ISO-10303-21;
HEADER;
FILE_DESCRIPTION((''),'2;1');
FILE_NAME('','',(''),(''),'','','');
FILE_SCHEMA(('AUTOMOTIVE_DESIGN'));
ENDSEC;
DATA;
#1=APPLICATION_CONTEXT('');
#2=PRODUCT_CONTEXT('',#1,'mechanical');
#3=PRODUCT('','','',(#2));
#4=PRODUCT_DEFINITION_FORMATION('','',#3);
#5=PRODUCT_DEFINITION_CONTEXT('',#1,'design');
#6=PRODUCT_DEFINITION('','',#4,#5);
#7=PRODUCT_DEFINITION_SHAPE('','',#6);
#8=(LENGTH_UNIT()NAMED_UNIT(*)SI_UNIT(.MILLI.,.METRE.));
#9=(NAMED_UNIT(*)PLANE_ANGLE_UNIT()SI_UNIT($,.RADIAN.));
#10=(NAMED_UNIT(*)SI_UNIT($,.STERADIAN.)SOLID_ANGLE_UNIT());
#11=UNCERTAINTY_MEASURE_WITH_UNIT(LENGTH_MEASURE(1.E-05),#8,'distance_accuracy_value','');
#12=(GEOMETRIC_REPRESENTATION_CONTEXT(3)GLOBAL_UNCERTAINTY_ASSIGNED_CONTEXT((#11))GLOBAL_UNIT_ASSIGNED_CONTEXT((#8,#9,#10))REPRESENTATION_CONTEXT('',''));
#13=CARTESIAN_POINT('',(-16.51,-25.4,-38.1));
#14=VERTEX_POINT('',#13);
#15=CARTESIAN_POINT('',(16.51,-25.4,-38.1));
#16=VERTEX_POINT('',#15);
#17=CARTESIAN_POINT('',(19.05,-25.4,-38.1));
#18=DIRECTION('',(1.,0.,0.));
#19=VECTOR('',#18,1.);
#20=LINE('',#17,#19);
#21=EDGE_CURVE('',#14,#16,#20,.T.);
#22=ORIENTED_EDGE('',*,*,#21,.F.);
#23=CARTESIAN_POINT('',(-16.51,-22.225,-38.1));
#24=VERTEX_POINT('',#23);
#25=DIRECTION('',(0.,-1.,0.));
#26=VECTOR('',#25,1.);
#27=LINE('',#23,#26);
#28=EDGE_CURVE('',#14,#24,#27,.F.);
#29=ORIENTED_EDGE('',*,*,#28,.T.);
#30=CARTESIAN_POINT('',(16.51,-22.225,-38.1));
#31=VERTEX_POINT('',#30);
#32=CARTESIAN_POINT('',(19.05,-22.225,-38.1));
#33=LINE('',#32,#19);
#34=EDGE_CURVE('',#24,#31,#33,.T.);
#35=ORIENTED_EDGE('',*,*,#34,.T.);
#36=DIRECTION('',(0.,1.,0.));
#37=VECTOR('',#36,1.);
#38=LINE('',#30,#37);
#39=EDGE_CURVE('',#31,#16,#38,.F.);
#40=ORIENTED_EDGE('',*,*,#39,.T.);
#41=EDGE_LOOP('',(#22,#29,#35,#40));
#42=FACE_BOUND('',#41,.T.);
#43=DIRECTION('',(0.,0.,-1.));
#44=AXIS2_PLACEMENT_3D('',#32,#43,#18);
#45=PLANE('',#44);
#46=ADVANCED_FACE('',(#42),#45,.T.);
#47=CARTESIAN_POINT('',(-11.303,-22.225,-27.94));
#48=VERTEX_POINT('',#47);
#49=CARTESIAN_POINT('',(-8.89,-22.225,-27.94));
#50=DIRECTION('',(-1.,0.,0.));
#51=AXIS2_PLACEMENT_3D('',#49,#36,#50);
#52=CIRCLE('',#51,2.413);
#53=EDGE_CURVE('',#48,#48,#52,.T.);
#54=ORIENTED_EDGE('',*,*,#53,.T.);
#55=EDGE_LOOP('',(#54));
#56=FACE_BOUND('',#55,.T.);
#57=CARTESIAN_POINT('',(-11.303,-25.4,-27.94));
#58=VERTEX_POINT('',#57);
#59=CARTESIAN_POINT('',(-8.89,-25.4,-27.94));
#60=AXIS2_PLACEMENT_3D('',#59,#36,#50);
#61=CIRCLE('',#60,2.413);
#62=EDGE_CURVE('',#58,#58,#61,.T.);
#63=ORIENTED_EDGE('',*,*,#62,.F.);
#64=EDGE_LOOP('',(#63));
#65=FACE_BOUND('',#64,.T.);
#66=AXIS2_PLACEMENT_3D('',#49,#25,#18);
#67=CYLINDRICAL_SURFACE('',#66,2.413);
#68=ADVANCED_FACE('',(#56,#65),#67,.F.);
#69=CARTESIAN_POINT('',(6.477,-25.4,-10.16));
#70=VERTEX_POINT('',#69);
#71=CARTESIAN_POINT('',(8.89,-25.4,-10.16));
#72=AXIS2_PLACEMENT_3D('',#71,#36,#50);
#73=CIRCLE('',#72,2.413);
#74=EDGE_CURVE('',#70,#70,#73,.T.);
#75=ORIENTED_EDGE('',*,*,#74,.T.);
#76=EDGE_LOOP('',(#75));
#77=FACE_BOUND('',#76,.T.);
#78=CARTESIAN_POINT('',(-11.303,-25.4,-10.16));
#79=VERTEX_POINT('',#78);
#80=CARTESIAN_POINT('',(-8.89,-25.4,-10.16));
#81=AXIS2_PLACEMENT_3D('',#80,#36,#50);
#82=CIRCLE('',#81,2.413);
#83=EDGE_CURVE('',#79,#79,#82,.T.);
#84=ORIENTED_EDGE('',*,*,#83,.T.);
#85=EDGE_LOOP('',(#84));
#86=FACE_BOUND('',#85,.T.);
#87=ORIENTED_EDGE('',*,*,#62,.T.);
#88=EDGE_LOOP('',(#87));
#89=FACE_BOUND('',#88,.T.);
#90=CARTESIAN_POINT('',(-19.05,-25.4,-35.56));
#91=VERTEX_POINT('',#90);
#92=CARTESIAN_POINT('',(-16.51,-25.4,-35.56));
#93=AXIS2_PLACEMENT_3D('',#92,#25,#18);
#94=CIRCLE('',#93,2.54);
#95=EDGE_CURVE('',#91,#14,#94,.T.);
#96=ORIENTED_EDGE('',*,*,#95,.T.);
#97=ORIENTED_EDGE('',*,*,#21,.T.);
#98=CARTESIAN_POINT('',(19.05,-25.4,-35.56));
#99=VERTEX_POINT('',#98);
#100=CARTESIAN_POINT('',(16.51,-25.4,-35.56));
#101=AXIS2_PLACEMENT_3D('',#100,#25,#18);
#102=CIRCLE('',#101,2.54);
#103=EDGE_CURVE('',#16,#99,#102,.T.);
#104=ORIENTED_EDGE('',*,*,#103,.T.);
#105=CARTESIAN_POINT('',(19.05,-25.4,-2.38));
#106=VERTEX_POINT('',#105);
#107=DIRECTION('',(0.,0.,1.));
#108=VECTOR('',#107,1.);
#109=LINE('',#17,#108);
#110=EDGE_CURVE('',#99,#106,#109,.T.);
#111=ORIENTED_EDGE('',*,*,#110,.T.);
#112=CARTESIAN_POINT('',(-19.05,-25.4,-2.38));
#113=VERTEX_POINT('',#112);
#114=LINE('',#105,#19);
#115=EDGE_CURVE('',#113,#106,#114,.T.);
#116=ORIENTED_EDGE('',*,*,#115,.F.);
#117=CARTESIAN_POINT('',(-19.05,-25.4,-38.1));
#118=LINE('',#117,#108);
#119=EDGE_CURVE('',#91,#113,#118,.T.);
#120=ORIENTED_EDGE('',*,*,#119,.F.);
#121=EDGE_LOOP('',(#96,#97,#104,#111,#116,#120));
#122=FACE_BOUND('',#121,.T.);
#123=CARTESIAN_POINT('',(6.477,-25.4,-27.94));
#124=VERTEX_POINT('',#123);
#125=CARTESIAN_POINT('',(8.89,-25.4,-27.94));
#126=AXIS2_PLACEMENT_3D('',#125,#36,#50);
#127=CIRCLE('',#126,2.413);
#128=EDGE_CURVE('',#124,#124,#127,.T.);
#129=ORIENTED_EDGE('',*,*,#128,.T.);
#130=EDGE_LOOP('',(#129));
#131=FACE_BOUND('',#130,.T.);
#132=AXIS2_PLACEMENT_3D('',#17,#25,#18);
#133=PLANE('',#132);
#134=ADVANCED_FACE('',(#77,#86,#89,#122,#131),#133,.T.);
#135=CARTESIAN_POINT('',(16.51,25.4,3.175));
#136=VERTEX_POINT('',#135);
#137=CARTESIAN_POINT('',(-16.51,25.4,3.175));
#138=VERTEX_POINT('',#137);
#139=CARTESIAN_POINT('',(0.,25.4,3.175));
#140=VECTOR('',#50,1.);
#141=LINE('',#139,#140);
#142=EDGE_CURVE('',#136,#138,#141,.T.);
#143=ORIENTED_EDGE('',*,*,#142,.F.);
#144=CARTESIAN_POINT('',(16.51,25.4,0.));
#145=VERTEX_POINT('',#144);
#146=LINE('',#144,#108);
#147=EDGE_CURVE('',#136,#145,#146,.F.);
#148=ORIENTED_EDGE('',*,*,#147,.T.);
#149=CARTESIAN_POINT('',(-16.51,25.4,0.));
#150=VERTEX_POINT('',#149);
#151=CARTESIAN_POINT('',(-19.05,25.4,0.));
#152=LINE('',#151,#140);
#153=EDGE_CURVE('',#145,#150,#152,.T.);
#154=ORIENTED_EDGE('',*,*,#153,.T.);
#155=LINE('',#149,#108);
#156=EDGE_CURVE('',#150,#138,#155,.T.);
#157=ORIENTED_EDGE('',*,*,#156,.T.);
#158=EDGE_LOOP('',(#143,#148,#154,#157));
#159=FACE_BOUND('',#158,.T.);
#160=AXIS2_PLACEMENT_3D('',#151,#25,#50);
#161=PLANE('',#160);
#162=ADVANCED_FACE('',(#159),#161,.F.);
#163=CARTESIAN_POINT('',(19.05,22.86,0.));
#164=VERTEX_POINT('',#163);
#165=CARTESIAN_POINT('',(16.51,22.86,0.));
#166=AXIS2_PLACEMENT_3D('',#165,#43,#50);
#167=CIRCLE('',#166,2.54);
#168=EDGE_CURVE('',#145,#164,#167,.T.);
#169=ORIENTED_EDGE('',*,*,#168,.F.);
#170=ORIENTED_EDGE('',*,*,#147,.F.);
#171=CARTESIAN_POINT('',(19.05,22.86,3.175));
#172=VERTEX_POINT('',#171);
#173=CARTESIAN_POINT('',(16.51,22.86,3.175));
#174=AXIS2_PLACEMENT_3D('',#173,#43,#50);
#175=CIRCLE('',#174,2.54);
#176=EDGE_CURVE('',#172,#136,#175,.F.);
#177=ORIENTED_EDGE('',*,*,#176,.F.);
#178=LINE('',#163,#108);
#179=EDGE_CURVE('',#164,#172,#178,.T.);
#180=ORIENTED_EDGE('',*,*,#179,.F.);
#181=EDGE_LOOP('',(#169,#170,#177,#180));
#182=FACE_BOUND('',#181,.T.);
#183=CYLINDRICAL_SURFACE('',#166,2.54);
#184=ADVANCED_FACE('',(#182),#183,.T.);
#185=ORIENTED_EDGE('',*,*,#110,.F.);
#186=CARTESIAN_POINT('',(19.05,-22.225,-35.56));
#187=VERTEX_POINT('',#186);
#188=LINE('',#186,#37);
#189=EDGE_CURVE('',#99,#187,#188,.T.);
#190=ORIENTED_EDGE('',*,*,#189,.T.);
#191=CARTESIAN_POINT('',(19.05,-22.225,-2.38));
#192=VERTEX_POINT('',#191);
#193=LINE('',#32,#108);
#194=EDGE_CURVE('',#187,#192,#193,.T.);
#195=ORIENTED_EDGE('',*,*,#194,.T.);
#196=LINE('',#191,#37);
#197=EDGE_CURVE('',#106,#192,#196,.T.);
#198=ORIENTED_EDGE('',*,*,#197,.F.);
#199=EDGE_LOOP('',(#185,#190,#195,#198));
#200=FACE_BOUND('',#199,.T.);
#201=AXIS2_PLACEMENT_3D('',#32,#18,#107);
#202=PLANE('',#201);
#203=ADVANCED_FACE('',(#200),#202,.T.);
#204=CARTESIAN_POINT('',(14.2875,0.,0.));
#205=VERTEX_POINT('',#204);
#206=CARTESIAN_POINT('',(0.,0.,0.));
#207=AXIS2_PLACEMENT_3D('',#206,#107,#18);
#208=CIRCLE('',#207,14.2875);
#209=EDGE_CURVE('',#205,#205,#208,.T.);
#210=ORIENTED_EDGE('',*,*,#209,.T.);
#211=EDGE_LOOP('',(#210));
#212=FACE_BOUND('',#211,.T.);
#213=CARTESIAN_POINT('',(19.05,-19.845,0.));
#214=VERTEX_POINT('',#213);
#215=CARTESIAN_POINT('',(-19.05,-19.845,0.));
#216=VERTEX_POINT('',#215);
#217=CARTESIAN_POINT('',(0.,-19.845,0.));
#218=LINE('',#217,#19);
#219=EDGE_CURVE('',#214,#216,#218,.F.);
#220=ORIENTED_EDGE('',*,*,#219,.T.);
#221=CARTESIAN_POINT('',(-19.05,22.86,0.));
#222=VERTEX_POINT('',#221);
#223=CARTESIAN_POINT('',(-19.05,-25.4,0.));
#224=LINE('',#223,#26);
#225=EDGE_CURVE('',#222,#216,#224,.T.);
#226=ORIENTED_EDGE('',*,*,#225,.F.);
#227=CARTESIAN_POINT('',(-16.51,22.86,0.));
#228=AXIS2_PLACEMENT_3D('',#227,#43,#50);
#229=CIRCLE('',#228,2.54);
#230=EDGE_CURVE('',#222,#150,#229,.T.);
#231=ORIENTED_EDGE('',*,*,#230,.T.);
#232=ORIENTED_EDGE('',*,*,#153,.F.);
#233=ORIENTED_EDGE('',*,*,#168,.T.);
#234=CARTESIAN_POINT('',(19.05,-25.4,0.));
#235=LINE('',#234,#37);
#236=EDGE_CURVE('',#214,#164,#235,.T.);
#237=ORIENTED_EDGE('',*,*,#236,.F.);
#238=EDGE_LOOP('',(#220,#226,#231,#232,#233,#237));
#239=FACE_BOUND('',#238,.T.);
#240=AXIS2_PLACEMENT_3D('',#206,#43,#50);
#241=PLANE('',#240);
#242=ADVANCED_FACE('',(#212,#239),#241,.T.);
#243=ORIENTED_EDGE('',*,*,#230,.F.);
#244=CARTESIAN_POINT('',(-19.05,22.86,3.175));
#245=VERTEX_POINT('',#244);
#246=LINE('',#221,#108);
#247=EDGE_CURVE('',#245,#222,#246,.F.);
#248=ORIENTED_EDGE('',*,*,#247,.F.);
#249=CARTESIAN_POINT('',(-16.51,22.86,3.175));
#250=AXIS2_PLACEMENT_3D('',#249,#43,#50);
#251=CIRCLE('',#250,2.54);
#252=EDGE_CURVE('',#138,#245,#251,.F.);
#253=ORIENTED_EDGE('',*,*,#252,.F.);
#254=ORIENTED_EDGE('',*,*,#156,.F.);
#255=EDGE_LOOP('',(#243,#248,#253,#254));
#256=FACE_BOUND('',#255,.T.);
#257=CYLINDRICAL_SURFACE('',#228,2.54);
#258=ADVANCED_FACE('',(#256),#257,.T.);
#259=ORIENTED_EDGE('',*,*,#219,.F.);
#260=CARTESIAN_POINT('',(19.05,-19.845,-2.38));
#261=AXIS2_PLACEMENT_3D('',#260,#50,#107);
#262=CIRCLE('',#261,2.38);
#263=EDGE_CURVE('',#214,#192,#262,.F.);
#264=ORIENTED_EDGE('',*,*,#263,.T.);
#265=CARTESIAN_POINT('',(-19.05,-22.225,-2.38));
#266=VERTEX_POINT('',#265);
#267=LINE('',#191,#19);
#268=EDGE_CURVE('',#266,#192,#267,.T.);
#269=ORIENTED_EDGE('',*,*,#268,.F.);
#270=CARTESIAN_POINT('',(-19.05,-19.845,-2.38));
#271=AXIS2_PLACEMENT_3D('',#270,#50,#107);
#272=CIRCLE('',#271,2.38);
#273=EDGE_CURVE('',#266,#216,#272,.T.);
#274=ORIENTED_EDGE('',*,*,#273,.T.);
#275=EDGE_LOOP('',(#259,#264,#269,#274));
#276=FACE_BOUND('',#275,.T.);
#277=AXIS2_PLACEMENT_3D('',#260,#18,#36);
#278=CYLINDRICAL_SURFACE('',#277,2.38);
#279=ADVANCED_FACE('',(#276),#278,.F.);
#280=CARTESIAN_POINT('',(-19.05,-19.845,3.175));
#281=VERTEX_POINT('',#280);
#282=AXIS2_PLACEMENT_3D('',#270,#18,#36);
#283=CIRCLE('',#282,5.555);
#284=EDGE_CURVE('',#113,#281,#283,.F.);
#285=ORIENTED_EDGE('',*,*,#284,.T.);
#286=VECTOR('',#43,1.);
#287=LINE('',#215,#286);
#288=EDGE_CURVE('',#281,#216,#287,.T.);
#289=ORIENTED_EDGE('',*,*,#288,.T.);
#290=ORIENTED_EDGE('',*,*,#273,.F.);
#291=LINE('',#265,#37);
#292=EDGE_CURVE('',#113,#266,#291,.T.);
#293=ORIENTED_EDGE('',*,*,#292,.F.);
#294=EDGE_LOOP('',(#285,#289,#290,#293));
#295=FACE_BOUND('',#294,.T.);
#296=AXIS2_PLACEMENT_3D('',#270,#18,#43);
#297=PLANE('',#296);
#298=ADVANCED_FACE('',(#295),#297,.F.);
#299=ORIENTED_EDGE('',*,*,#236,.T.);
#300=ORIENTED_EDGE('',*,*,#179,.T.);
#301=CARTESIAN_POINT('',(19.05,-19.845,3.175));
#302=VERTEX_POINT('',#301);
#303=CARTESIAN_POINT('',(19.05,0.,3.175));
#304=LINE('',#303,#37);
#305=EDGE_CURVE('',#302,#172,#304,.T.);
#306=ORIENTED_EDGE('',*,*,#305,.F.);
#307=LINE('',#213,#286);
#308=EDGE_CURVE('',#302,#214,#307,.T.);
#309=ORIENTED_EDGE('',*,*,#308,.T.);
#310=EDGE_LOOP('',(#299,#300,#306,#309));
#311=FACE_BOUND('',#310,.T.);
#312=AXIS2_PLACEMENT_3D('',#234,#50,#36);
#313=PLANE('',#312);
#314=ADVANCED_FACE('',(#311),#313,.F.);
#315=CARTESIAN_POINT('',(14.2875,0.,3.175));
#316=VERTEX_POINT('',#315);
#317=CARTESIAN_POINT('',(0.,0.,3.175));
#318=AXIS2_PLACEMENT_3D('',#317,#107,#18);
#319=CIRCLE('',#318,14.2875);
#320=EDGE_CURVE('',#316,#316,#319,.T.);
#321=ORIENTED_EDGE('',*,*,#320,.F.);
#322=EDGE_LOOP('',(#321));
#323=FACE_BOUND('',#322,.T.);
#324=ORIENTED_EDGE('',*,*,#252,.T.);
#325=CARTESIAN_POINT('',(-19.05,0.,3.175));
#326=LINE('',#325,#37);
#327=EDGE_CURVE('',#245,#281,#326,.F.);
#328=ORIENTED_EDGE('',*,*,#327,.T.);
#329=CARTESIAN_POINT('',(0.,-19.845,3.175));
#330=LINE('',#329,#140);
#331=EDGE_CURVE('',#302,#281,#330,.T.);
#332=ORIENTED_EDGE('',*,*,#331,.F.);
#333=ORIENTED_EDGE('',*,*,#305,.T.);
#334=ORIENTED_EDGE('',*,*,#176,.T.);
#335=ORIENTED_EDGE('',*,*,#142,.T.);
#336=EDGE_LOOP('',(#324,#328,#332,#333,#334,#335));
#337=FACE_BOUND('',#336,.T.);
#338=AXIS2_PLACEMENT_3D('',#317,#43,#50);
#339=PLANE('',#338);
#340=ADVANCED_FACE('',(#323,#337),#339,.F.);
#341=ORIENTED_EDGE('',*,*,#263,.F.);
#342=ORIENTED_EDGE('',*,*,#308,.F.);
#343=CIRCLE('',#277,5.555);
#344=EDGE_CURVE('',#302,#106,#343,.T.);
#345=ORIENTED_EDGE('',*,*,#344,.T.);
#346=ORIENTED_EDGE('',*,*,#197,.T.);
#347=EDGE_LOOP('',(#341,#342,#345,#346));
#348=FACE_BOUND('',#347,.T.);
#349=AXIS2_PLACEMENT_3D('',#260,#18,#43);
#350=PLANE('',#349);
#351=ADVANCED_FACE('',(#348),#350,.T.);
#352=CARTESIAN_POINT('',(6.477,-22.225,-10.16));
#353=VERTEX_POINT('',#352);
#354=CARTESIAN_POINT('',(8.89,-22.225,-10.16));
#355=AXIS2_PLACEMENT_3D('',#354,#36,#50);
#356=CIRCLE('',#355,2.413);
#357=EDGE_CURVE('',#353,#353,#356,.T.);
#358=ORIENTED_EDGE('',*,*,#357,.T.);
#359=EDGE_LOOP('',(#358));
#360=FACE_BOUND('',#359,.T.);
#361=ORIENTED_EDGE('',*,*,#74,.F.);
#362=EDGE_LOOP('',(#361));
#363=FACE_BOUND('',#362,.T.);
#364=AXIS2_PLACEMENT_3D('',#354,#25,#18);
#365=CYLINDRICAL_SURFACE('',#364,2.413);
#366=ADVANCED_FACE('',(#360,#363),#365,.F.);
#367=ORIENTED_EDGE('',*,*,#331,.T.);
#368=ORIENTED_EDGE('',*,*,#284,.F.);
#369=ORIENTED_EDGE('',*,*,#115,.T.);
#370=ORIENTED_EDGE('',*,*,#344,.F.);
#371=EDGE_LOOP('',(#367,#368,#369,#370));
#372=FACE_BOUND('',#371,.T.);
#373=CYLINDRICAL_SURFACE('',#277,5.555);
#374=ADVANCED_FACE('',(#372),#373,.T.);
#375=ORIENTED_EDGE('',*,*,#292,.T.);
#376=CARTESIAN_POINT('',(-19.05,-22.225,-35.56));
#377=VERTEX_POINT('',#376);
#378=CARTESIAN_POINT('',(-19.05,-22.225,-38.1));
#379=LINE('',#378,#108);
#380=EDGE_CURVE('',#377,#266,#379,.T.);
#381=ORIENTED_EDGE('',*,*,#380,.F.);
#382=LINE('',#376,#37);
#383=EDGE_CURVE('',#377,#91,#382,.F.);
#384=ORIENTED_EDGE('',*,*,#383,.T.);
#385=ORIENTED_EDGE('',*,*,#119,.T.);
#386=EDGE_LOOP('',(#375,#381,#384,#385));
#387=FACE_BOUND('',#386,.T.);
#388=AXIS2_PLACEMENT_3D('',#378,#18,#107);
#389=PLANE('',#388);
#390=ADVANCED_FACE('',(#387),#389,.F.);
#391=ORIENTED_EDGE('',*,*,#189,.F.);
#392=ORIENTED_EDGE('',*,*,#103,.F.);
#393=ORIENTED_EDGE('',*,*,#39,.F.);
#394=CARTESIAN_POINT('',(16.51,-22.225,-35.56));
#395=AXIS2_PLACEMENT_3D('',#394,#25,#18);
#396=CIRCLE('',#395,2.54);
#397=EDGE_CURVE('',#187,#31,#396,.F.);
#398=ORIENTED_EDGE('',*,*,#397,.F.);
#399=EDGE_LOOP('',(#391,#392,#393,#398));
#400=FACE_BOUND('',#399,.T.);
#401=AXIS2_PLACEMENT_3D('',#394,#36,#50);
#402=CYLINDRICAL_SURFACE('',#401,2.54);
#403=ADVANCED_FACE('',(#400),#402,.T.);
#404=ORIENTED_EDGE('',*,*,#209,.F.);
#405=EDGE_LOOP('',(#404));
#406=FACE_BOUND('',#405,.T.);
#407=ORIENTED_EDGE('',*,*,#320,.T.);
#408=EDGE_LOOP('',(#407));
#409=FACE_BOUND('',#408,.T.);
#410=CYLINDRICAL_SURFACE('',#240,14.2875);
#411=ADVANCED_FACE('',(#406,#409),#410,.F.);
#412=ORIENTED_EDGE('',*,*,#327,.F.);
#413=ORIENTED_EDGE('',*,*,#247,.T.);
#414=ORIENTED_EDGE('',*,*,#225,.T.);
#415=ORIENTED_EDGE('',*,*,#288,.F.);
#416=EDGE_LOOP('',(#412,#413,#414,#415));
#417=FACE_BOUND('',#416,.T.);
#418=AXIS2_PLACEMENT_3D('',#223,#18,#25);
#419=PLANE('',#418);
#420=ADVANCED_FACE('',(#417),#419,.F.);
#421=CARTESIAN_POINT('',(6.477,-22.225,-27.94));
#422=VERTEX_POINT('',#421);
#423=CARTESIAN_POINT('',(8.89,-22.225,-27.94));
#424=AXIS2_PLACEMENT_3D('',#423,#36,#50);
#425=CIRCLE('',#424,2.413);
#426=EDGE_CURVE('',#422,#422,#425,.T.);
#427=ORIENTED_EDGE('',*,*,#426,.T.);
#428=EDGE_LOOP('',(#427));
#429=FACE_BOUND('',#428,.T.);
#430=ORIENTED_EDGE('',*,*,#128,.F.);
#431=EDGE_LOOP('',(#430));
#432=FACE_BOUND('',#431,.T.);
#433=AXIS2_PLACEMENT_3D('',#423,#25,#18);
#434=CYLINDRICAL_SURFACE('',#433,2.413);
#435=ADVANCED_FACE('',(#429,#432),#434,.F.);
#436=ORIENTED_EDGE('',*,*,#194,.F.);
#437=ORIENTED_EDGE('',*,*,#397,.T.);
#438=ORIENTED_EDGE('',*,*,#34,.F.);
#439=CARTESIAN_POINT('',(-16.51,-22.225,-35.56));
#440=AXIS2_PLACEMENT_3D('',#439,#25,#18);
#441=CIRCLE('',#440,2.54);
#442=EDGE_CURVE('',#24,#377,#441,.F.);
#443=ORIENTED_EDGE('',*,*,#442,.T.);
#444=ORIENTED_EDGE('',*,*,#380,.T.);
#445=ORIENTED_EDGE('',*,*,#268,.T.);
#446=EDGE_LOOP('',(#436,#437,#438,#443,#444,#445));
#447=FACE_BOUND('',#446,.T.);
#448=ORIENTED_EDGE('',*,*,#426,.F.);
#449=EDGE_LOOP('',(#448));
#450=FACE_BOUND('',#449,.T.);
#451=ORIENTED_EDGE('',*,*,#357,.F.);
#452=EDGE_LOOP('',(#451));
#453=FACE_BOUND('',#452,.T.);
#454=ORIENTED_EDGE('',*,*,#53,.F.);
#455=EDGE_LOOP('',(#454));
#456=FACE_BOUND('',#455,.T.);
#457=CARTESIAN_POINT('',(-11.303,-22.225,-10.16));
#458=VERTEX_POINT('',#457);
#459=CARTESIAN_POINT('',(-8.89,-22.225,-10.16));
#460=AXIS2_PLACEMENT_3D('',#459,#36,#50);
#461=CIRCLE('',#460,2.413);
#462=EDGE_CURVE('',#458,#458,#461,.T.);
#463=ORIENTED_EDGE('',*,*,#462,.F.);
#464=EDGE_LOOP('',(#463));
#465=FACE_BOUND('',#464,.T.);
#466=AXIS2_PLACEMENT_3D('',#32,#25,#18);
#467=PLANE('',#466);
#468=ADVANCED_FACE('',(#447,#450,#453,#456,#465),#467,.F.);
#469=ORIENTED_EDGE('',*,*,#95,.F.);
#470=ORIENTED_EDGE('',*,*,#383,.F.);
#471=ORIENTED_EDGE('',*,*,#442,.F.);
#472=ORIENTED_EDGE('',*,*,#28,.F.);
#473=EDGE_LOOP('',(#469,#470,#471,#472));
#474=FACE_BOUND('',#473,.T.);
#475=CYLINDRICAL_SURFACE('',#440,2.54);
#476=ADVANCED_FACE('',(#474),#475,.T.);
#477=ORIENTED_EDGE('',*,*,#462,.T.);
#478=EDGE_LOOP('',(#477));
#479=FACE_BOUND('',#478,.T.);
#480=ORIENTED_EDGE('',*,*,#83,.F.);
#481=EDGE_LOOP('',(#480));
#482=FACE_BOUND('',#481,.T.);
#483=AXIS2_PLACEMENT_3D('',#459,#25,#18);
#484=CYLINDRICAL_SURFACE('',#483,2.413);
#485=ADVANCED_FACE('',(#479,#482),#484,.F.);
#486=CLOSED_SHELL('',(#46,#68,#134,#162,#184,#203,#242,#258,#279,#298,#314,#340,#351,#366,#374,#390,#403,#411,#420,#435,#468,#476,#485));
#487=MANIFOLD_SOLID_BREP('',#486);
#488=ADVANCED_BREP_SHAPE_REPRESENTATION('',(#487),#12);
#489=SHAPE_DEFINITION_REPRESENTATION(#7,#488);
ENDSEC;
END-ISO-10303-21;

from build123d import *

# Parameters (mm, degrees)
SKETCH1_W              = 38.1
SKETCH1_H              = 50.8
SKETCH1_R              = 14.2875
BOSS_EXTRUDE1_DEPTH    = 3.175
SKETCH2_W              = 38.1
SKETCH2_H              = 3.175
BOSS_EXTRUDE2_DEPTH    = 38.1
SKETCH3_R              = 2.413
CUT_EXTRUDE1_DEPTH     = 64.895642457
CONVERT_SOLID1_START   = -19.05
CONVERT_SOLID1_DEPTH   = 38.1
CONVERT_SOLID1_2_DEPTH = 38.1
FILLET1_R              = 2.54


# Read off the part's stored shape, not the designer's step: Convert-Solid1
with BuildPart() as part:
    # Sketch1 → Boss-Extrude1 (new body)
    with BuildSketch(Plane.XY):
        Rectangle(SKETCH1_W, SKETCH1_H)
        Circle(SKETCH1_R, mode=Mode.SUBTRACT)
    extrude(amount=BOSS_EXTRUDE1_DEPTH)

    # Sketch2 → Boss-Extrude2 (add)
    with BuildSketch(Plane(origin=(0, 0, 0), x_dir=(-1, 0, 0), z_dir=(0, 0, -1))):
        with Locations((0, -23.8125)):
            Rectangle(SKETCH2_W, SKETCH2_H)
    extrude(amount=BOSS_EXTRUDE2_DEPTH)

    # Sketch3 → Cut-Extrude1 (cut, through all)
    with BuildSketch(Plane(origin=(0, -22.225, 0), x_dir=(1, 0, 0), z_dir=(0, 1, 0))):
        with Locations(Location((-8.89, 27.94, 0), (0, 0, 180))):
            Circle(SKETCH3_R)
        with Locations(Location((8.89, 27.94, 0), (0, 0, 180))):
            Circle(SKETCH3_R)
        with Locations(Location((-8.89, 10.16, 0), (0, 0, 180))):
            Circle(SKETCH3_R)
        with Locations(Location((8.89, 10.16, 0), (0, 0, 180))):
            Circle(SKETCH3_R)
    extrude(amount=-CUT_EXTRUDE1_DEPTH, mode=Mode.SUBTRACT)

    # Convert-Solid1 outline → Convert-Solid1 (cut)
    with BuildSketch(Plane.YZ.offset(CONVERT_SOLID1_START)):
        with BuildLine():
            ThreePointArc((-25.4, -2.380000066), (-23.77297815, 1.54797815), (-19.844999934, 3.175))
            Line((-19.844999934, 3.175), (-25.4, 3.175))
            Line((-25.4, 3.175), (-25.4, -2.380000066))
        make_face()
    extrude(amount=CONVERT_SOLID1_DEPTH, mode=Mode.SUBTRACT)

    # Convert-Solid1 2 outline → Convert-Solid1 2 (add)
    with BuildSketch(Plane.YZ.offset(CONVERT_SOLID1_START)):
        with BuildLine():
            ThreePointArc((-22.225, -2.380000066), (-21.52791412, -0.69708588), (-19.844999934, 0))
            Line((-19.844999934, 0), (-22.225, 0))
            Line((-22.225, 0), (-22.225, -2.380000066))
        make_face()
    extrude(amount=CONVERT_SOLID1_2_DEPTH)

    # Fillet1
    fillet1_edges = [part.edges().sort_by_distance(p)[0] for p in [
        (19.05, 25.4, 1.5875),
        (-19.05, 25.4, 1.5875),
        (-19.05, -23.8125, -38.1),
        (19.05, -23.8125, -38.1),
    ]]
    fillet(fillet1_edges, radius=FILLET1_R)


solid = part.part
